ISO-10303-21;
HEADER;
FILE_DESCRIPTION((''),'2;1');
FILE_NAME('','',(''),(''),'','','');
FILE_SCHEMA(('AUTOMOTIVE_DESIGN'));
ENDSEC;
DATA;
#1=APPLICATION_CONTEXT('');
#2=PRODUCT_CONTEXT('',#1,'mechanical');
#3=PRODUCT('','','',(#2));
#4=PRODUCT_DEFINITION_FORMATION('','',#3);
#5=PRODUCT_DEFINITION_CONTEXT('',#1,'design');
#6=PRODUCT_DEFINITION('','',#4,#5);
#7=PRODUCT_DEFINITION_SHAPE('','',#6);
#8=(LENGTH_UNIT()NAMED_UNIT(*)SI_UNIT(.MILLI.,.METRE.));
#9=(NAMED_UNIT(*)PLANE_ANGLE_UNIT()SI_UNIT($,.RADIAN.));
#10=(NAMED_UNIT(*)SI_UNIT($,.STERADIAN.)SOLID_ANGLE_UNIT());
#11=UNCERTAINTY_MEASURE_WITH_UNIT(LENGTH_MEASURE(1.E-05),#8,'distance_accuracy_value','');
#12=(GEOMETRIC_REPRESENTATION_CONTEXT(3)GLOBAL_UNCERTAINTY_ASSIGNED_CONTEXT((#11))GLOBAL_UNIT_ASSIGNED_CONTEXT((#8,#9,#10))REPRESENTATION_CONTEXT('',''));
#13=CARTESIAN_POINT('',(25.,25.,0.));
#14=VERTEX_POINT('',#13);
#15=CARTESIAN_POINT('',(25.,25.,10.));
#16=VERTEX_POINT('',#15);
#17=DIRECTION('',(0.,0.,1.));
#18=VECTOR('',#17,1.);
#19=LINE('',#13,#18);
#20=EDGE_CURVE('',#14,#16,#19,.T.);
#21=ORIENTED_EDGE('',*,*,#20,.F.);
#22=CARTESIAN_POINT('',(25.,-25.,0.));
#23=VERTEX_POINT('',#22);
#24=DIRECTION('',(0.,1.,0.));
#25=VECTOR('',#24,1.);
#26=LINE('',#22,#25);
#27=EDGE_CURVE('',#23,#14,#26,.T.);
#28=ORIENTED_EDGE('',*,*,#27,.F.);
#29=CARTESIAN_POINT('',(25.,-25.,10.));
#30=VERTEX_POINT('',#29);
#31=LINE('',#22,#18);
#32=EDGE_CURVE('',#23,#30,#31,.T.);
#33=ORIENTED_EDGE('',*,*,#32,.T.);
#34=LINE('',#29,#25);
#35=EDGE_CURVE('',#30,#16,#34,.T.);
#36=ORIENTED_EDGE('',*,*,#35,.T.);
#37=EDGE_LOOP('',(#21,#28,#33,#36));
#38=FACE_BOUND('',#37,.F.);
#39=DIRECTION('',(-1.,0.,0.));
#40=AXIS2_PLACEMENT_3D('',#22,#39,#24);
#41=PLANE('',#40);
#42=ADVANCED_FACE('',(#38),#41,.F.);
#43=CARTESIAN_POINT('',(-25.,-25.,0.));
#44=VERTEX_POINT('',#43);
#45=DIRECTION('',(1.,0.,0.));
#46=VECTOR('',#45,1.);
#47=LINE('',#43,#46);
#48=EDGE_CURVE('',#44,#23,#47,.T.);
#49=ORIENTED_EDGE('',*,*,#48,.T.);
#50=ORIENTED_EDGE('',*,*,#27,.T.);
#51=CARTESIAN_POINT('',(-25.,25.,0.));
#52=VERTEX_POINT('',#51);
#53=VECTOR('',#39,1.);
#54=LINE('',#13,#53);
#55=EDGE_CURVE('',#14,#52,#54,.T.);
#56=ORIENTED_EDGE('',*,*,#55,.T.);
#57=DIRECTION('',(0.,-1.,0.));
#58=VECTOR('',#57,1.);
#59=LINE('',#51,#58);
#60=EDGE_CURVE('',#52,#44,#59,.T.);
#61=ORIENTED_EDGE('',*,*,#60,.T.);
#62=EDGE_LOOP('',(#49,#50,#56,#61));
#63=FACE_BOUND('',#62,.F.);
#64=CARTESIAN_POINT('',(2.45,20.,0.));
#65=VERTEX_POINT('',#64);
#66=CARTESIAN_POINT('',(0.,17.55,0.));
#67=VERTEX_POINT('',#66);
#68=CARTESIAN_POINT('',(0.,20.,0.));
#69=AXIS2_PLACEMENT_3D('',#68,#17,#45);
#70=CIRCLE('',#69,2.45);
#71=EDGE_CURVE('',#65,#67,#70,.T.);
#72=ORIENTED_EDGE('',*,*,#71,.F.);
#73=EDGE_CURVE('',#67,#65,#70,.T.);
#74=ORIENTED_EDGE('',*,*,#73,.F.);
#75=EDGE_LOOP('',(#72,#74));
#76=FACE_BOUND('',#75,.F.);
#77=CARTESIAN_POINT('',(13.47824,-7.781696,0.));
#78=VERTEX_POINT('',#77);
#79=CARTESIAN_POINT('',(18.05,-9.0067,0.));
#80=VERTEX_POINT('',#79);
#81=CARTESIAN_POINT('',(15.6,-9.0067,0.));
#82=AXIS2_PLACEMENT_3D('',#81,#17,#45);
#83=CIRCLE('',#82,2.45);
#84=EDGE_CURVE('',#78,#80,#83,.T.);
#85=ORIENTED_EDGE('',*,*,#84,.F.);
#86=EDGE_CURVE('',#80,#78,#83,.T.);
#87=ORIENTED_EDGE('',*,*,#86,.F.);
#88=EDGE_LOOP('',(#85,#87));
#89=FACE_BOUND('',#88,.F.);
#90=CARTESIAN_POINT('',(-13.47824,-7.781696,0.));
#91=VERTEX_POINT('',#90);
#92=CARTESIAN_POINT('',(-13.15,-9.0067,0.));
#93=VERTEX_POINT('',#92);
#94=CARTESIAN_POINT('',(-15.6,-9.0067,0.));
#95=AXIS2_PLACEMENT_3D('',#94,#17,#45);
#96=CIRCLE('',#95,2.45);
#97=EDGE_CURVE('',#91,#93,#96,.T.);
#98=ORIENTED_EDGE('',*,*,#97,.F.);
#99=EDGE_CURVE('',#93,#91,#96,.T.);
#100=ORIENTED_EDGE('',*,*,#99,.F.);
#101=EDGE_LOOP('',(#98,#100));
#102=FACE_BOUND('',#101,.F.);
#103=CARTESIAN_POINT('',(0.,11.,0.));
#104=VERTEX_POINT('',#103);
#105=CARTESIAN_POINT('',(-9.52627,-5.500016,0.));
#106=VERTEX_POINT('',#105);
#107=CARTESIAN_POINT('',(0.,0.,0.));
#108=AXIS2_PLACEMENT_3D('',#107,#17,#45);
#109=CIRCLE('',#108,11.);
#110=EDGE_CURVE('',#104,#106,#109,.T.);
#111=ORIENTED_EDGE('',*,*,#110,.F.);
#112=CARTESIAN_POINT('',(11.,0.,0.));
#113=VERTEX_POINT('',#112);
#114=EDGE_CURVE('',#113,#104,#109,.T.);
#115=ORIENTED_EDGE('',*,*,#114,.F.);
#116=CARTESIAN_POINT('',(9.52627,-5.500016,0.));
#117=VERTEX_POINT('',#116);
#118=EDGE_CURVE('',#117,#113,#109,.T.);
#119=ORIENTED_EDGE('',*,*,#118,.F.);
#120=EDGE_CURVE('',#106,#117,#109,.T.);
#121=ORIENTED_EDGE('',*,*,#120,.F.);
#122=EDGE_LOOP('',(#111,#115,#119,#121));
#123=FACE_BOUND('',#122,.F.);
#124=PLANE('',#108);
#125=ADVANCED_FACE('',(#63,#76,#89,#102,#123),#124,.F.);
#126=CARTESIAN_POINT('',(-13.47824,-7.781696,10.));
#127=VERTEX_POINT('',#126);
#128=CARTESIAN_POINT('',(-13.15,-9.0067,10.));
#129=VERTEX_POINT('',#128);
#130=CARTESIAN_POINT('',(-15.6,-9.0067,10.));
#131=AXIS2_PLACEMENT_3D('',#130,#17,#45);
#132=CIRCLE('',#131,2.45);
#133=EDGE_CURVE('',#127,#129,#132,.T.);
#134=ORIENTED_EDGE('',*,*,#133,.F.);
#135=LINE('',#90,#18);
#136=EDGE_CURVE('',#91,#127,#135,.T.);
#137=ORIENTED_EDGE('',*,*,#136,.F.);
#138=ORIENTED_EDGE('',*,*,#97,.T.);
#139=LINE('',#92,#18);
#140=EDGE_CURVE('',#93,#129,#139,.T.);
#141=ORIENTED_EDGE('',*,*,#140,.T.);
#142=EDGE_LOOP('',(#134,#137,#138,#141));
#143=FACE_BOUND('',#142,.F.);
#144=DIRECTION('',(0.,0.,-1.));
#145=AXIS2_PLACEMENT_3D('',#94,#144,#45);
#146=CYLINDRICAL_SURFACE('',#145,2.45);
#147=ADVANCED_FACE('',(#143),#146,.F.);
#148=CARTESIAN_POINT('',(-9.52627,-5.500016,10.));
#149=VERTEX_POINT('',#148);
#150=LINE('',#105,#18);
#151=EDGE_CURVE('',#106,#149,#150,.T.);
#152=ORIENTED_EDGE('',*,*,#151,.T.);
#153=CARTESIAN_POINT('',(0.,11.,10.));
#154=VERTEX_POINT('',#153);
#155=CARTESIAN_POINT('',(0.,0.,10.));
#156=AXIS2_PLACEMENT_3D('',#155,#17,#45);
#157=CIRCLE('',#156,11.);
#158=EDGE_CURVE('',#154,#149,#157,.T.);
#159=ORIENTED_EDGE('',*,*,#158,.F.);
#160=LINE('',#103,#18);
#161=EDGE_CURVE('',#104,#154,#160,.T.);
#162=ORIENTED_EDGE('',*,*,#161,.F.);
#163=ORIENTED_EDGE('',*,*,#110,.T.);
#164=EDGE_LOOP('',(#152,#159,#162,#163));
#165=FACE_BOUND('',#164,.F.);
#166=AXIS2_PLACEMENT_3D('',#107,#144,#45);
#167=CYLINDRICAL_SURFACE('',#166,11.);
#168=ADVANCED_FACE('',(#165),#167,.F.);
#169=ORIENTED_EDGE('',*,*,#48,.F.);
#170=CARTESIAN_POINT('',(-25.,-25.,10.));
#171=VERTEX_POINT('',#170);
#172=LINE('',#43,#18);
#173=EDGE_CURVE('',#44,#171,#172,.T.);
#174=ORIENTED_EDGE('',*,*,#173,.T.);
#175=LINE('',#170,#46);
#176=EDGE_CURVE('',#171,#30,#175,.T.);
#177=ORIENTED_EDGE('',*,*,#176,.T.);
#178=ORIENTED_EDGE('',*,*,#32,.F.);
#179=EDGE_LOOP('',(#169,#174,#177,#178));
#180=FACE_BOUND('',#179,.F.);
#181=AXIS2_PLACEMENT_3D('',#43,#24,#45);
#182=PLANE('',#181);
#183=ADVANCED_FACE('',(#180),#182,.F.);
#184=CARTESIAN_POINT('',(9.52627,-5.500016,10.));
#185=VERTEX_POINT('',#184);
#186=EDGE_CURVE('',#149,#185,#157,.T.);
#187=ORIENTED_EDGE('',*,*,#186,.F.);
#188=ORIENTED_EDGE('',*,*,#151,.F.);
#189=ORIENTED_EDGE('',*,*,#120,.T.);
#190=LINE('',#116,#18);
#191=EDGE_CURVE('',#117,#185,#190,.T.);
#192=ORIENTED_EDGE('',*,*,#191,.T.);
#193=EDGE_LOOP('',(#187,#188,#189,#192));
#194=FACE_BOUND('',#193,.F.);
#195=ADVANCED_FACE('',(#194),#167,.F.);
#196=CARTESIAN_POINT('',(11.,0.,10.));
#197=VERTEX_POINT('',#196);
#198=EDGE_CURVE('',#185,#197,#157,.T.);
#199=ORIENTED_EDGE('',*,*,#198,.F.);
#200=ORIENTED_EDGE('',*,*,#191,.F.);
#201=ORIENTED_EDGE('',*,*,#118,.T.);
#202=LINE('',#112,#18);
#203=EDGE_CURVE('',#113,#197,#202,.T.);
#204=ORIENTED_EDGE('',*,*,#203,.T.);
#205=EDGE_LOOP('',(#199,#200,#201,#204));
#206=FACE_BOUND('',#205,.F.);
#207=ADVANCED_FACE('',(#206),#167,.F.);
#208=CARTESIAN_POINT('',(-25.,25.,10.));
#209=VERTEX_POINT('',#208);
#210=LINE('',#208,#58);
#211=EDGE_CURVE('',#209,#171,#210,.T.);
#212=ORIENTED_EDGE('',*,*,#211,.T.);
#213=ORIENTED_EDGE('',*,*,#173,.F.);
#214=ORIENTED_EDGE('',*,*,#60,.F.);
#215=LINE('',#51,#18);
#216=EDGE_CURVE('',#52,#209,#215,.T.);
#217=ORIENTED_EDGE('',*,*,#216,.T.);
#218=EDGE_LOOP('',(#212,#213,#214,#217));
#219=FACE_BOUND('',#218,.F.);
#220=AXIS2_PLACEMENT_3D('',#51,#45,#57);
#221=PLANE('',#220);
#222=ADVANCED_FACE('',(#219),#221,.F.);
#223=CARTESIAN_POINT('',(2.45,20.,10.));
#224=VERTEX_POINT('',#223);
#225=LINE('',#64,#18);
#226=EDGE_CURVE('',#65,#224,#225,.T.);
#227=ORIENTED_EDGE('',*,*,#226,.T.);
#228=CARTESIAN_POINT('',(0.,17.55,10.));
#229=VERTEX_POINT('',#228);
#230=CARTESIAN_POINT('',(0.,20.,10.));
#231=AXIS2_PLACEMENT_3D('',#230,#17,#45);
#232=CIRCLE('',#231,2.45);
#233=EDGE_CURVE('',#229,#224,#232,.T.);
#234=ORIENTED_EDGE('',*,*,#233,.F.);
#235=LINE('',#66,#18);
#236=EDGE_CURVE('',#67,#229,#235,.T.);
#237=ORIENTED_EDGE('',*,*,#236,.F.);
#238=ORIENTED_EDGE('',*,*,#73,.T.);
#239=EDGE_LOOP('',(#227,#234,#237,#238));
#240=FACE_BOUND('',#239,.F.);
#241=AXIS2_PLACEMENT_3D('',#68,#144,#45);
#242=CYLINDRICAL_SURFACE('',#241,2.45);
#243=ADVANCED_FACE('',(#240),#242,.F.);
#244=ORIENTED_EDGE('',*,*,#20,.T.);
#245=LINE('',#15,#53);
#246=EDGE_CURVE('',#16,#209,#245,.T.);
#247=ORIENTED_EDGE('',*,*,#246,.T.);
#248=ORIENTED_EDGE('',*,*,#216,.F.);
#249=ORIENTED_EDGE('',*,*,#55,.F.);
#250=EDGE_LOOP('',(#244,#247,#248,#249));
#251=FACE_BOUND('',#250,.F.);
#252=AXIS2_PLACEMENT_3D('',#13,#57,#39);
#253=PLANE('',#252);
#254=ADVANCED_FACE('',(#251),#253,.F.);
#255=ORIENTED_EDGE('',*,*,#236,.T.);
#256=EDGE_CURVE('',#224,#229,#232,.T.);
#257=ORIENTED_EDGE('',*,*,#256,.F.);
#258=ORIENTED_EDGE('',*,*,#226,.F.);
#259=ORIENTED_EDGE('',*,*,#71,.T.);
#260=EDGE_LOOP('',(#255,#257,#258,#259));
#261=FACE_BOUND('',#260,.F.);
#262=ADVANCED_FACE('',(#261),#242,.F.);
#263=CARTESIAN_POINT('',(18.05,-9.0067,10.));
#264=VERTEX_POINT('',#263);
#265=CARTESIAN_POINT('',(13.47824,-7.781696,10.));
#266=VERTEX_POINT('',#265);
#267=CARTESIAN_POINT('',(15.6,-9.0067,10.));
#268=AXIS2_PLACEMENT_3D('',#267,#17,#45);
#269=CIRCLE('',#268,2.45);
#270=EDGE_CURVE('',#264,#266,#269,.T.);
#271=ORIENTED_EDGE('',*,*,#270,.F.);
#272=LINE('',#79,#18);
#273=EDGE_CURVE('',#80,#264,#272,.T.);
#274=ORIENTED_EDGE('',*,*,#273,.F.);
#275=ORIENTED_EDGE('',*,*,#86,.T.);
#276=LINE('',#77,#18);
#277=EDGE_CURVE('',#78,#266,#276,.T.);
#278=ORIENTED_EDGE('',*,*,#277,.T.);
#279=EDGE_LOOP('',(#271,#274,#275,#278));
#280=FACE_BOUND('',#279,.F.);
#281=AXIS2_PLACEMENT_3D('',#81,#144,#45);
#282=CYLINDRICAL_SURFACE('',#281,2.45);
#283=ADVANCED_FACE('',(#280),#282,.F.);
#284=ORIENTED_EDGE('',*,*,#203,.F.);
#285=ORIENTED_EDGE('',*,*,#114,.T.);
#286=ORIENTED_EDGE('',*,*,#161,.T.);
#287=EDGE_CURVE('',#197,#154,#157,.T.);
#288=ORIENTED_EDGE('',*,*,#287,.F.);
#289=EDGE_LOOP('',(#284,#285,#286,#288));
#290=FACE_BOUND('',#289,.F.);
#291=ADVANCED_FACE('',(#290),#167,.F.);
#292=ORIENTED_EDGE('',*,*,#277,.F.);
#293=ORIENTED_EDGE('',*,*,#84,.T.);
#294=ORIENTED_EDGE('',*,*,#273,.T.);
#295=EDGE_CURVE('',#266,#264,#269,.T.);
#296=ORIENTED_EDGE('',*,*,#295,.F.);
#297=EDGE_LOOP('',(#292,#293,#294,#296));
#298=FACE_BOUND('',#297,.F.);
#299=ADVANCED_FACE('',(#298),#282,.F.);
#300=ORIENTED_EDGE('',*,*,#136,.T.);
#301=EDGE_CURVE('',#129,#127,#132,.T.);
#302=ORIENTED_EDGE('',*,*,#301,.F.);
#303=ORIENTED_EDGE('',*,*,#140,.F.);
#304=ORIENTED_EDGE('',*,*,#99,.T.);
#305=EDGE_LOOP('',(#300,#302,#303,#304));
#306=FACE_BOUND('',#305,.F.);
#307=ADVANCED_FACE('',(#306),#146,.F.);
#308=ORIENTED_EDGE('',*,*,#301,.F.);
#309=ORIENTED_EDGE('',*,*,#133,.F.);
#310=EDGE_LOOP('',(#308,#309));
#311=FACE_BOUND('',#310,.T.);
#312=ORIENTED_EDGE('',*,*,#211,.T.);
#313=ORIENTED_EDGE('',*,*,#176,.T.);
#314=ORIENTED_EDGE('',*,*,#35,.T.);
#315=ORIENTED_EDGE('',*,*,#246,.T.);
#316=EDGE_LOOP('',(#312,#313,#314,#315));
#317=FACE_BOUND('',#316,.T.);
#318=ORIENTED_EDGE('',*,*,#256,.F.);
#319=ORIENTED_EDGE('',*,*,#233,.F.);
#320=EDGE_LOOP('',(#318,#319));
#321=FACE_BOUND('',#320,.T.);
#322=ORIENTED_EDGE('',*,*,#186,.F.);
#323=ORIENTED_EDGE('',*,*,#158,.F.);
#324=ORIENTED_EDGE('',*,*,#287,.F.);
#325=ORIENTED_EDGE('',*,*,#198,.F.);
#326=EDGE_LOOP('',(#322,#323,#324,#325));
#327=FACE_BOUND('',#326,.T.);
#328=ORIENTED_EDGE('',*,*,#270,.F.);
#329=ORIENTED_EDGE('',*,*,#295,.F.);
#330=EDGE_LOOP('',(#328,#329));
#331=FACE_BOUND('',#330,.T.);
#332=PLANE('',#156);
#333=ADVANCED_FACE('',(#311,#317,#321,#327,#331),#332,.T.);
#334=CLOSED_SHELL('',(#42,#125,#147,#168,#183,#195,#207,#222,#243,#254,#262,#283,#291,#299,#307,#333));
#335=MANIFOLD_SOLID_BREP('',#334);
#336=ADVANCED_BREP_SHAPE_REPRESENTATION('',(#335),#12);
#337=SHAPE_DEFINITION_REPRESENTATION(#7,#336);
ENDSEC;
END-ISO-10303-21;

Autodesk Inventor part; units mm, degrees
ref_plane "YZ Plane" through (0, 0, 0) normal (1, 0, 0) x (0, 1, 0)
ref_plane "XZ Plane" through (0, 0, 0) normal (0, 1, 0) x (-1, 0, 0)
ref_plane "XY Plane" through (0, 0, 0) normal (0, 0, 1) x (1, 0, 0)
sketch "Sketch1" plane through (0, 0, 0) normal (0, 0, 1) x (1, 0, 0)
  line L0 (-25, -25) -> (25, -25)
  line L1 (25, -25) -> (25, 25)
  line L2 (25, 25) -> (-25, 25)
  line L3 (-25, 25) -> (-25, -25)
  line L4 (-25, -25) -> (25, 25) construction
  line L5 (25, -25) -> (-25, 25) construction
  circle A0 centre (0, 0) radius 11
  line L6 (0, 0) -> (0, 20)
  line L7 (0, 0) -> (15.6, -9.0067)
  line L8 (0, 0) -> (-15.6, -9.0067)
  circle A1 centre (0, 20) radius 2.45
  circle A2 centre (15.6, -9.0067) radius 2.45
  circle A3 centre (-15.6, -9.0067) radius 2.45
  point P0 (25, -8.5947)
  point P1 (-25, -8.5947)
  dimension "d0" = 50
  dimension "d1" = 50
  dimension "d2" = 22
  dimension "d3" = 20
  dimension "d4" = 15.6
  dimension "d5" = 120
  dimension "d6" = 15.6
  dimension "d7" = 120
  dimension "d8" = 4.9
  dimension "d9" = 4.9
  dimension "d10" = 4.9
extrude "Extrusion2" add sketch "Sketch1" along normal blind 10
equation "\"d1\" = d0"
equation "\"d4\" = d6"
equation "\"d7\" = d5"
equation "\"d9\" = d8"
equation "\"d10\" = d8"
properties part number "mount_v03"
